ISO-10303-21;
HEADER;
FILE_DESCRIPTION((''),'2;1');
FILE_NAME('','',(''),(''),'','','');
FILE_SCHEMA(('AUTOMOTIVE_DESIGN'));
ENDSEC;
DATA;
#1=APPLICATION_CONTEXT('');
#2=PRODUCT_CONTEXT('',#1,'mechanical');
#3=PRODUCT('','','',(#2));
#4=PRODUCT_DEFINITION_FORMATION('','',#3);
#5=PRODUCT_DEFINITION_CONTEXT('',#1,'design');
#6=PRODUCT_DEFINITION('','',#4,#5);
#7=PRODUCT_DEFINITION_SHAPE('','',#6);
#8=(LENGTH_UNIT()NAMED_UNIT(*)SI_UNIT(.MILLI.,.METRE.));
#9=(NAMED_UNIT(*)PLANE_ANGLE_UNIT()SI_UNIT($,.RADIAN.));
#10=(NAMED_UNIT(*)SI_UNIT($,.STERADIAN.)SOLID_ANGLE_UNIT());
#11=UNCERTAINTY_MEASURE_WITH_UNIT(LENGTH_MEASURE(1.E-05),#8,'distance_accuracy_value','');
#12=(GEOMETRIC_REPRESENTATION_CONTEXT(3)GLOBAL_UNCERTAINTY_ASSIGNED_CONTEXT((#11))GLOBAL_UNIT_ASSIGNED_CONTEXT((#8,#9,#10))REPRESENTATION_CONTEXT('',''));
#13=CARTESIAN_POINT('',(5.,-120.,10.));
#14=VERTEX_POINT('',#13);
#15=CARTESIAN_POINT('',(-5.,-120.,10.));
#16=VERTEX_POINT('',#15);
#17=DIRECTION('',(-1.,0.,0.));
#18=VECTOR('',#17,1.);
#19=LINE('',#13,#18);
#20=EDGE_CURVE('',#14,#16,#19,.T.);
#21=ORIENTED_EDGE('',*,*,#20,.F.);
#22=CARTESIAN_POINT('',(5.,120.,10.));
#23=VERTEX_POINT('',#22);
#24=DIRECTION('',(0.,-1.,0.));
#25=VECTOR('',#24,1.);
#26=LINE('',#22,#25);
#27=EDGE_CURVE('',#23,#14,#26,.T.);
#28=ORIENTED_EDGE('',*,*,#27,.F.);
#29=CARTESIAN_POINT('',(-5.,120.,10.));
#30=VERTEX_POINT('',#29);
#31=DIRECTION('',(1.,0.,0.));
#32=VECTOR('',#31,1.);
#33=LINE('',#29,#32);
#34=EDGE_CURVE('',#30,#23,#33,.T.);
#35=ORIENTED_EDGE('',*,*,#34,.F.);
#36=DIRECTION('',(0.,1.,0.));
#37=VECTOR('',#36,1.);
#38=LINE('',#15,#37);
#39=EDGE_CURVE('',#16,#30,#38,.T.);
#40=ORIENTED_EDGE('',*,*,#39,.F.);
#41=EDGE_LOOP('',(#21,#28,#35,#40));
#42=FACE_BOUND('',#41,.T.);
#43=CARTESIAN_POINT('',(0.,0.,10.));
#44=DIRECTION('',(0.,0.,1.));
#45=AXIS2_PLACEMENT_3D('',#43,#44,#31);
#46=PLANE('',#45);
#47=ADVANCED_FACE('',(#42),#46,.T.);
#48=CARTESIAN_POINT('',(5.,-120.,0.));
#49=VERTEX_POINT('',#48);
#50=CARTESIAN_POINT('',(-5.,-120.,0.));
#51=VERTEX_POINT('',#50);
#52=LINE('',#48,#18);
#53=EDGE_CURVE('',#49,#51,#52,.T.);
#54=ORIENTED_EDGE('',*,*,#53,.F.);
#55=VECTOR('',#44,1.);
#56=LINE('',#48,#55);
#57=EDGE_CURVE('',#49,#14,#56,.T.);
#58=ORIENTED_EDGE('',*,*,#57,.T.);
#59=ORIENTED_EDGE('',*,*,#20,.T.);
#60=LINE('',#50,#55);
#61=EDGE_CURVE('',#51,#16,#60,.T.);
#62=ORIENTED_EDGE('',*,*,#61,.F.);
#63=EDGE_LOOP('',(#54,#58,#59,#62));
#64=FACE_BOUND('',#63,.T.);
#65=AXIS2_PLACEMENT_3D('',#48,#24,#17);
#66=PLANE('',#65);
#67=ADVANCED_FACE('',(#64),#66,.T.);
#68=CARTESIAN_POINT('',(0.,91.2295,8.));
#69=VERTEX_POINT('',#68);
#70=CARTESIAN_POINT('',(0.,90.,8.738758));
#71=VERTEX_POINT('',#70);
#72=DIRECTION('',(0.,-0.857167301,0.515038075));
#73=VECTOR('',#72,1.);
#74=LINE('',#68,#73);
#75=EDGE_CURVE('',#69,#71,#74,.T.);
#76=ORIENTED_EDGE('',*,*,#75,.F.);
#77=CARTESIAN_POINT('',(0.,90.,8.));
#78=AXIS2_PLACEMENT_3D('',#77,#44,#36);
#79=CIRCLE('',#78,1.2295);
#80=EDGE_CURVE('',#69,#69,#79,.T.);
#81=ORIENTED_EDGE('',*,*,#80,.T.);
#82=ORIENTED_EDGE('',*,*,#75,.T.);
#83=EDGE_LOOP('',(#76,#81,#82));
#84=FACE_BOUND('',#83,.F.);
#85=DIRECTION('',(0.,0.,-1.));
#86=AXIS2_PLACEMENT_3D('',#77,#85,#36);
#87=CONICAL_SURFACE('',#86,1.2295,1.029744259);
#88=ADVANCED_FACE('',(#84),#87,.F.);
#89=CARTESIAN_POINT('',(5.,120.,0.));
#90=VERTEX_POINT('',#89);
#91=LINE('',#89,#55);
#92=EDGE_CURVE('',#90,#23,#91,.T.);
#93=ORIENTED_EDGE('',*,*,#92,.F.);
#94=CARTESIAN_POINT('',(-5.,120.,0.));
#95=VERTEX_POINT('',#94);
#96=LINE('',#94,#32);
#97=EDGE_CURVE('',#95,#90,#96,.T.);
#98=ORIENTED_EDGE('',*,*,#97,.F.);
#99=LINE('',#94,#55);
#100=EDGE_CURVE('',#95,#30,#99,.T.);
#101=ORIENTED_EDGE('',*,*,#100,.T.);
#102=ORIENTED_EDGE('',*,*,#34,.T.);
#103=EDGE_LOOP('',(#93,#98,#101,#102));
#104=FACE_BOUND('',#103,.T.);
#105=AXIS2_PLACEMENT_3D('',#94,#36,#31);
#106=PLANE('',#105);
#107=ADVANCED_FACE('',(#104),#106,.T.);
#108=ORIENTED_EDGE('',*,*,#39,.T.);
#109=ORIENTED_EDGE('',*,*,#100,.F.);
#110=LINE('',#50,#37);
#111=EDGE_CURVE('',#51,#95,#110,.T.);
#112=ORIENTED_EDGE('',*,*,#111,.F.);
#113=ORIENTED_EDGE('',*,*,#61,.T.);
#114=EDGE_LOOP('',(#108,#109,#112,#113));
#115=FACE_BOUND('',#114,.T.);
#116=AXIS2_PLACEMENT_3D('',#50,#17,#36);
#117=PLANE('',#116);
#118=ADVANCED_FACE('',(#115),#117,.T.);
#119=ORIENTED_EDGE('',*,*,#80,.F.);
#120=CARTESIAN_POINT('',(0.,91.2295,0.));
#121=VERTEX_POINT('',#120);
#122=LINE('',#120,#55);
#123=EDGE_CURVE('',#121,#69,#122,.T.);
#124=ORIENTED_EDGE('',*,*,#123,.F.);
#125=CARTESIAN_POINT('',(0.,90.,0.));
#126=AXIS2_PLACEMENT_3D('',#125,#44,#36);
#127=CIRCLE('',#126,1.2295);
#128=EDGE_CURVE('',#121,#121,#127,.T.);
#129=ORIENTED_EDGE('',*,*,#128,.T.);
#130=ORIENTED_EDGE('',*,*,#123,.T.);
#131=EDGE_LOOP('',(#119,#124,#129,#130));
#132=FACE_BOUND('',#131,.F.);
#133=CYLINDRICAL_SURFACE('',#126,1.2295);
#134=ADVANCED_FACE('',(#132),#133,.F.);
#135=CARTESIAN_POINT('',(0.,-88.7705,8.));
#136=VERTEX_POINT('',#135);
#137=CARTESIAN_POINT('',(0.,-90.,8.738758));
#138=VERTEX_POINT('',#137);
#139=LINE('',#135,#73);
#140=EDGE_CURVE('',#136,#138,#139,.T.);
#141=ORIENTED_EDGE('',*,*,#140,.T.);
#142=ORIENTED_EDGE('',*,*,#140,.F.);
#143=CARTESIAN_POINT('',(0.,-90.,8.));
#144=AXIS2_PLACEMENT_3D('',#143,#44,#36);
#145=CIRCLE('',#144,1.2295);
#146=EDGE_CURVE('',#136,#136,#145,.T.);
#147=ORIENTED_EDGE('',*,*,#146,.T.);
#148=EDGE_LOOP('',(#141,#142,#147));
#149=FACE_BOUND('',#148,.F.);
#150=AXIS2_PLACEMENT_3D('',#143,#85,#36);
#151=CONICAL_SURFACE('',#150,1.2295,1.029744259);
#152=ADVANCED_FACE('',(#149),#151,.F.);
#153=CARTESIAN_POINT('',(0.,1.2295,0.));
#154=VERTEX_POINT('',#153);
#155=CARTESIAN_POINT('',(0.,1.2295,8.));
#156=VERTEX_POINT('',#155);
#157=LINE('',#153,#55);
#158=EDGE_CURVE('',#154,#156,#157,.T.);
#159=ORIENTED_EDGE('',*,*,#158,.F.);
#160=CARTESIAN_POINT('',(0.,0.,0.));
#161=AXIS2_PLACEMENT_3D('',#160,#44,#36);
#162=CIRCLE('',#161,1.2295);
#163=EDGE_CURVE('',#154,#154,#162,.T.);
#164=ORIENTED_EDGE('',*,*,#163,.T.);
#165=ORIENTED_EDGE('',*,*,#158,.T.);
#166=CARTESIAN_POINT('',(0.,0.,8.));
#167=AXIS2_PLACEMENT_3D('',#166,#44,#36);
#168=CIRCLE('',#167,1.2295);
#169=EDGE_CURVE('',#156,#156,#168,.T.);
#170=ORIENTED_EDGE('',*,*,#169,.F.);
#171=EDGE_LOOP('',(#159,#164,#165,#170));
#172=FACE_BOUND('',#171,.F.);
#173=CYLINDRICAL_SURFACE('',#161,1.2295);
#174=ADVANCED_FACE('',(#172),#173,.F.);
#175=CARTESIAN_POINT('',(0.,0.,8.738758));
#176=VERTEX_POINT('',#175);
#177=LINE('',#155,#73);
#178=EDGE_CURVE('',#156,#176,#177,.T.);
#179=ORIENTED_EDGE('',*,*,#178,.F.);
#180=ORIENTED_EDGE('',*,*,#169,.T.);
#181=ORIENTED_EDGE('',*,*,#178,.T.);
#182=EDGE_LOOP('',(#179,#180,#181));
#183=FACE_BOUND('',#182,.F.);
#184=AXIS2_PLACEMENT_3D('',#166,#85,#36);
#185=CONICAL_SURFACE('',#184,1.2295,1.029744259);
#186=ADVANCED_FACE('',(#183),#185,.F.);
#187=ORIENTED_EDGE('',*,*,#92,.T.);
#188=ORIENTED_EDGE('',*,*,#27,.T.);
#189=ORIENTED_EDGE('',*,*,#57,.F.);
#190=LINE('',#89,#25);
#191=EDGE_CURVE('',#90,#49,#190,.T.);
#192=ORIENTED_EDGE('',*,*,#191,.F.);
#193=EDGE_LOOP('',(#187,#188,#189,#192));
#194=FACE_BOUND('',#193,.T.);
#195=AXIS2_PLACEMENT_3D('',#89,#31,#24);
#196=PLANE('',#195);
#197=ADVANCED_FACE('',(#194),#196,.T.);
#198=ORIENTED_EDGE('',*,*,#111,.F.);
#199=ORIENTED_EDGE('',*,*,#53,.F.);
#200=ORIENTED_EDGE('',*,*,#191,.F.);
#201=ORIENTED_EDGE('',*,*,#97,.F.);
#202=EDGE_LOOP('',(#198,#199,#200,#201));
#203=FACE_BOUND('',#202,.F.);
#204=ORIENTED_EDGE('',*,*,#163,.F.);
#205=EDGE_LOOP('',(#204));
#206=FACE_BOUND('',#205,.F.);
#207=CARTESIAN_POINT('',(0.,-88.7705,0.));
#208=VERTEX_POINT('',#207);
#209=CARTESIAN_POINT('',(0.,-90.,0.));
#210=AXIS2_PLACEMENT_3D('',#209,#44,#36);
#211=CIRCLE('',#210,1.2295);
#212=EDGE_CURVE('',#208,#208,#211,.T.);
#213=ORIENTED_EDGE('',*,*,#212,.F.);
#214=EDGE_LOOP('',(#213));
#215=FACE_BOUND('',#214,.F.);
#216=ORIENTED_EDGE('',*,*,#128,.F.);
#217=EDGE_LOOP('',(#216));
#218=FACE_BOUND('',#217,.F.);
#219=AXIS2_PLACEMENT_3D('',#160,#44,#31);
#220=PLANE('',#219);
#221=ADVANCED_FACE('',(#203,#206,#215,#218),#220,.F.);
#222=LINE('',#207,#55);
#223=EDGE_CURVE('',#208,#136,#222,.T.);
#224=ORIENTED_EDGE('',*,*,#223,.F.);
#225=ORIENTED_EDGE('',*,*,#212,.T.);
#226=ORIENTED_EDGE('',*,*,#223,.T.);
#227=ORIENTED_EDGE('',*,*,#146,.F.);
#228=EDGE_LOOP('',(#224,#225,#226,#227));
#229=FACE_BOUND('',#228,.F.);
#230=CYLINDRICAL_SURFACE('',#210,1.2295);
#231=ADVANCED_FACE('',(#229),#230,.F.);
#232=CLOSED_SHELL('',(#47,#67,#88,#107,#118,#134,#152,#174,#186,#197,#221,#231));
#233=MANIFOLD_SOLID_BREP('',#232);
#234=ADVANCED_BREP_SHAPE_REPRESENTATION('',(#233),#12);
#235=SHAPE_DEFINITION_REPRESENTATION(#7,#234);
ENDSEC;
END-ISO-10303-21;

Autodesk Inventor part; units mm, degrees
ref_plane "YZ Plane" through (0, 0, 0) normal (1, 0, 0) x (0, 1, 0)
ref_plane "XZ Plane" through (0, 0, 0) normal (0, 1, 0) x (-1, 0, 0)
ref_plane "XY Plane" through (0, 0, 0) normal (0, 0, 1) x (1, 0, 0)
sketch "Esboço1" plane through (0, 0, 0) normal (0, 0, 1) x (1, 0, 0)
  line L0 (-7, 0) -> (7, 0) construction
  line L1 (0, -168) -> (0, 168) construction
  line L2 (-5, 120) -> (5, 120)
  line L3 (5, 120) -> (5, -120)
  line L4 (5, -120) -> (-5, -120)
  line L5 (-5, -120) -> (-5, 120)
  point P0 (0, 0)
  point P1 (0, -90)
  point P2 (0, 0)
  point P3 (0, 90)
  dimension "d0" = 10
  dimension "d1" = 240
  dimension "d4" = 90
  dimension "d12" = 30
extrude "Extrusão1" add sketch "Esboço1" along normal blind 10
hole "Furo1" at (0, -90, 0) at (0, 0, 0) at (0, 90, 0) direction (0, 0, 1) diameter 2.459 depth 8 tip angle 118 thread size "M3x0.5" class "6H" standard "ISO Metric profile"
equation "\"d2\" = d0"
properties part number "VEJ-00-013A" material "Durastone BK"
